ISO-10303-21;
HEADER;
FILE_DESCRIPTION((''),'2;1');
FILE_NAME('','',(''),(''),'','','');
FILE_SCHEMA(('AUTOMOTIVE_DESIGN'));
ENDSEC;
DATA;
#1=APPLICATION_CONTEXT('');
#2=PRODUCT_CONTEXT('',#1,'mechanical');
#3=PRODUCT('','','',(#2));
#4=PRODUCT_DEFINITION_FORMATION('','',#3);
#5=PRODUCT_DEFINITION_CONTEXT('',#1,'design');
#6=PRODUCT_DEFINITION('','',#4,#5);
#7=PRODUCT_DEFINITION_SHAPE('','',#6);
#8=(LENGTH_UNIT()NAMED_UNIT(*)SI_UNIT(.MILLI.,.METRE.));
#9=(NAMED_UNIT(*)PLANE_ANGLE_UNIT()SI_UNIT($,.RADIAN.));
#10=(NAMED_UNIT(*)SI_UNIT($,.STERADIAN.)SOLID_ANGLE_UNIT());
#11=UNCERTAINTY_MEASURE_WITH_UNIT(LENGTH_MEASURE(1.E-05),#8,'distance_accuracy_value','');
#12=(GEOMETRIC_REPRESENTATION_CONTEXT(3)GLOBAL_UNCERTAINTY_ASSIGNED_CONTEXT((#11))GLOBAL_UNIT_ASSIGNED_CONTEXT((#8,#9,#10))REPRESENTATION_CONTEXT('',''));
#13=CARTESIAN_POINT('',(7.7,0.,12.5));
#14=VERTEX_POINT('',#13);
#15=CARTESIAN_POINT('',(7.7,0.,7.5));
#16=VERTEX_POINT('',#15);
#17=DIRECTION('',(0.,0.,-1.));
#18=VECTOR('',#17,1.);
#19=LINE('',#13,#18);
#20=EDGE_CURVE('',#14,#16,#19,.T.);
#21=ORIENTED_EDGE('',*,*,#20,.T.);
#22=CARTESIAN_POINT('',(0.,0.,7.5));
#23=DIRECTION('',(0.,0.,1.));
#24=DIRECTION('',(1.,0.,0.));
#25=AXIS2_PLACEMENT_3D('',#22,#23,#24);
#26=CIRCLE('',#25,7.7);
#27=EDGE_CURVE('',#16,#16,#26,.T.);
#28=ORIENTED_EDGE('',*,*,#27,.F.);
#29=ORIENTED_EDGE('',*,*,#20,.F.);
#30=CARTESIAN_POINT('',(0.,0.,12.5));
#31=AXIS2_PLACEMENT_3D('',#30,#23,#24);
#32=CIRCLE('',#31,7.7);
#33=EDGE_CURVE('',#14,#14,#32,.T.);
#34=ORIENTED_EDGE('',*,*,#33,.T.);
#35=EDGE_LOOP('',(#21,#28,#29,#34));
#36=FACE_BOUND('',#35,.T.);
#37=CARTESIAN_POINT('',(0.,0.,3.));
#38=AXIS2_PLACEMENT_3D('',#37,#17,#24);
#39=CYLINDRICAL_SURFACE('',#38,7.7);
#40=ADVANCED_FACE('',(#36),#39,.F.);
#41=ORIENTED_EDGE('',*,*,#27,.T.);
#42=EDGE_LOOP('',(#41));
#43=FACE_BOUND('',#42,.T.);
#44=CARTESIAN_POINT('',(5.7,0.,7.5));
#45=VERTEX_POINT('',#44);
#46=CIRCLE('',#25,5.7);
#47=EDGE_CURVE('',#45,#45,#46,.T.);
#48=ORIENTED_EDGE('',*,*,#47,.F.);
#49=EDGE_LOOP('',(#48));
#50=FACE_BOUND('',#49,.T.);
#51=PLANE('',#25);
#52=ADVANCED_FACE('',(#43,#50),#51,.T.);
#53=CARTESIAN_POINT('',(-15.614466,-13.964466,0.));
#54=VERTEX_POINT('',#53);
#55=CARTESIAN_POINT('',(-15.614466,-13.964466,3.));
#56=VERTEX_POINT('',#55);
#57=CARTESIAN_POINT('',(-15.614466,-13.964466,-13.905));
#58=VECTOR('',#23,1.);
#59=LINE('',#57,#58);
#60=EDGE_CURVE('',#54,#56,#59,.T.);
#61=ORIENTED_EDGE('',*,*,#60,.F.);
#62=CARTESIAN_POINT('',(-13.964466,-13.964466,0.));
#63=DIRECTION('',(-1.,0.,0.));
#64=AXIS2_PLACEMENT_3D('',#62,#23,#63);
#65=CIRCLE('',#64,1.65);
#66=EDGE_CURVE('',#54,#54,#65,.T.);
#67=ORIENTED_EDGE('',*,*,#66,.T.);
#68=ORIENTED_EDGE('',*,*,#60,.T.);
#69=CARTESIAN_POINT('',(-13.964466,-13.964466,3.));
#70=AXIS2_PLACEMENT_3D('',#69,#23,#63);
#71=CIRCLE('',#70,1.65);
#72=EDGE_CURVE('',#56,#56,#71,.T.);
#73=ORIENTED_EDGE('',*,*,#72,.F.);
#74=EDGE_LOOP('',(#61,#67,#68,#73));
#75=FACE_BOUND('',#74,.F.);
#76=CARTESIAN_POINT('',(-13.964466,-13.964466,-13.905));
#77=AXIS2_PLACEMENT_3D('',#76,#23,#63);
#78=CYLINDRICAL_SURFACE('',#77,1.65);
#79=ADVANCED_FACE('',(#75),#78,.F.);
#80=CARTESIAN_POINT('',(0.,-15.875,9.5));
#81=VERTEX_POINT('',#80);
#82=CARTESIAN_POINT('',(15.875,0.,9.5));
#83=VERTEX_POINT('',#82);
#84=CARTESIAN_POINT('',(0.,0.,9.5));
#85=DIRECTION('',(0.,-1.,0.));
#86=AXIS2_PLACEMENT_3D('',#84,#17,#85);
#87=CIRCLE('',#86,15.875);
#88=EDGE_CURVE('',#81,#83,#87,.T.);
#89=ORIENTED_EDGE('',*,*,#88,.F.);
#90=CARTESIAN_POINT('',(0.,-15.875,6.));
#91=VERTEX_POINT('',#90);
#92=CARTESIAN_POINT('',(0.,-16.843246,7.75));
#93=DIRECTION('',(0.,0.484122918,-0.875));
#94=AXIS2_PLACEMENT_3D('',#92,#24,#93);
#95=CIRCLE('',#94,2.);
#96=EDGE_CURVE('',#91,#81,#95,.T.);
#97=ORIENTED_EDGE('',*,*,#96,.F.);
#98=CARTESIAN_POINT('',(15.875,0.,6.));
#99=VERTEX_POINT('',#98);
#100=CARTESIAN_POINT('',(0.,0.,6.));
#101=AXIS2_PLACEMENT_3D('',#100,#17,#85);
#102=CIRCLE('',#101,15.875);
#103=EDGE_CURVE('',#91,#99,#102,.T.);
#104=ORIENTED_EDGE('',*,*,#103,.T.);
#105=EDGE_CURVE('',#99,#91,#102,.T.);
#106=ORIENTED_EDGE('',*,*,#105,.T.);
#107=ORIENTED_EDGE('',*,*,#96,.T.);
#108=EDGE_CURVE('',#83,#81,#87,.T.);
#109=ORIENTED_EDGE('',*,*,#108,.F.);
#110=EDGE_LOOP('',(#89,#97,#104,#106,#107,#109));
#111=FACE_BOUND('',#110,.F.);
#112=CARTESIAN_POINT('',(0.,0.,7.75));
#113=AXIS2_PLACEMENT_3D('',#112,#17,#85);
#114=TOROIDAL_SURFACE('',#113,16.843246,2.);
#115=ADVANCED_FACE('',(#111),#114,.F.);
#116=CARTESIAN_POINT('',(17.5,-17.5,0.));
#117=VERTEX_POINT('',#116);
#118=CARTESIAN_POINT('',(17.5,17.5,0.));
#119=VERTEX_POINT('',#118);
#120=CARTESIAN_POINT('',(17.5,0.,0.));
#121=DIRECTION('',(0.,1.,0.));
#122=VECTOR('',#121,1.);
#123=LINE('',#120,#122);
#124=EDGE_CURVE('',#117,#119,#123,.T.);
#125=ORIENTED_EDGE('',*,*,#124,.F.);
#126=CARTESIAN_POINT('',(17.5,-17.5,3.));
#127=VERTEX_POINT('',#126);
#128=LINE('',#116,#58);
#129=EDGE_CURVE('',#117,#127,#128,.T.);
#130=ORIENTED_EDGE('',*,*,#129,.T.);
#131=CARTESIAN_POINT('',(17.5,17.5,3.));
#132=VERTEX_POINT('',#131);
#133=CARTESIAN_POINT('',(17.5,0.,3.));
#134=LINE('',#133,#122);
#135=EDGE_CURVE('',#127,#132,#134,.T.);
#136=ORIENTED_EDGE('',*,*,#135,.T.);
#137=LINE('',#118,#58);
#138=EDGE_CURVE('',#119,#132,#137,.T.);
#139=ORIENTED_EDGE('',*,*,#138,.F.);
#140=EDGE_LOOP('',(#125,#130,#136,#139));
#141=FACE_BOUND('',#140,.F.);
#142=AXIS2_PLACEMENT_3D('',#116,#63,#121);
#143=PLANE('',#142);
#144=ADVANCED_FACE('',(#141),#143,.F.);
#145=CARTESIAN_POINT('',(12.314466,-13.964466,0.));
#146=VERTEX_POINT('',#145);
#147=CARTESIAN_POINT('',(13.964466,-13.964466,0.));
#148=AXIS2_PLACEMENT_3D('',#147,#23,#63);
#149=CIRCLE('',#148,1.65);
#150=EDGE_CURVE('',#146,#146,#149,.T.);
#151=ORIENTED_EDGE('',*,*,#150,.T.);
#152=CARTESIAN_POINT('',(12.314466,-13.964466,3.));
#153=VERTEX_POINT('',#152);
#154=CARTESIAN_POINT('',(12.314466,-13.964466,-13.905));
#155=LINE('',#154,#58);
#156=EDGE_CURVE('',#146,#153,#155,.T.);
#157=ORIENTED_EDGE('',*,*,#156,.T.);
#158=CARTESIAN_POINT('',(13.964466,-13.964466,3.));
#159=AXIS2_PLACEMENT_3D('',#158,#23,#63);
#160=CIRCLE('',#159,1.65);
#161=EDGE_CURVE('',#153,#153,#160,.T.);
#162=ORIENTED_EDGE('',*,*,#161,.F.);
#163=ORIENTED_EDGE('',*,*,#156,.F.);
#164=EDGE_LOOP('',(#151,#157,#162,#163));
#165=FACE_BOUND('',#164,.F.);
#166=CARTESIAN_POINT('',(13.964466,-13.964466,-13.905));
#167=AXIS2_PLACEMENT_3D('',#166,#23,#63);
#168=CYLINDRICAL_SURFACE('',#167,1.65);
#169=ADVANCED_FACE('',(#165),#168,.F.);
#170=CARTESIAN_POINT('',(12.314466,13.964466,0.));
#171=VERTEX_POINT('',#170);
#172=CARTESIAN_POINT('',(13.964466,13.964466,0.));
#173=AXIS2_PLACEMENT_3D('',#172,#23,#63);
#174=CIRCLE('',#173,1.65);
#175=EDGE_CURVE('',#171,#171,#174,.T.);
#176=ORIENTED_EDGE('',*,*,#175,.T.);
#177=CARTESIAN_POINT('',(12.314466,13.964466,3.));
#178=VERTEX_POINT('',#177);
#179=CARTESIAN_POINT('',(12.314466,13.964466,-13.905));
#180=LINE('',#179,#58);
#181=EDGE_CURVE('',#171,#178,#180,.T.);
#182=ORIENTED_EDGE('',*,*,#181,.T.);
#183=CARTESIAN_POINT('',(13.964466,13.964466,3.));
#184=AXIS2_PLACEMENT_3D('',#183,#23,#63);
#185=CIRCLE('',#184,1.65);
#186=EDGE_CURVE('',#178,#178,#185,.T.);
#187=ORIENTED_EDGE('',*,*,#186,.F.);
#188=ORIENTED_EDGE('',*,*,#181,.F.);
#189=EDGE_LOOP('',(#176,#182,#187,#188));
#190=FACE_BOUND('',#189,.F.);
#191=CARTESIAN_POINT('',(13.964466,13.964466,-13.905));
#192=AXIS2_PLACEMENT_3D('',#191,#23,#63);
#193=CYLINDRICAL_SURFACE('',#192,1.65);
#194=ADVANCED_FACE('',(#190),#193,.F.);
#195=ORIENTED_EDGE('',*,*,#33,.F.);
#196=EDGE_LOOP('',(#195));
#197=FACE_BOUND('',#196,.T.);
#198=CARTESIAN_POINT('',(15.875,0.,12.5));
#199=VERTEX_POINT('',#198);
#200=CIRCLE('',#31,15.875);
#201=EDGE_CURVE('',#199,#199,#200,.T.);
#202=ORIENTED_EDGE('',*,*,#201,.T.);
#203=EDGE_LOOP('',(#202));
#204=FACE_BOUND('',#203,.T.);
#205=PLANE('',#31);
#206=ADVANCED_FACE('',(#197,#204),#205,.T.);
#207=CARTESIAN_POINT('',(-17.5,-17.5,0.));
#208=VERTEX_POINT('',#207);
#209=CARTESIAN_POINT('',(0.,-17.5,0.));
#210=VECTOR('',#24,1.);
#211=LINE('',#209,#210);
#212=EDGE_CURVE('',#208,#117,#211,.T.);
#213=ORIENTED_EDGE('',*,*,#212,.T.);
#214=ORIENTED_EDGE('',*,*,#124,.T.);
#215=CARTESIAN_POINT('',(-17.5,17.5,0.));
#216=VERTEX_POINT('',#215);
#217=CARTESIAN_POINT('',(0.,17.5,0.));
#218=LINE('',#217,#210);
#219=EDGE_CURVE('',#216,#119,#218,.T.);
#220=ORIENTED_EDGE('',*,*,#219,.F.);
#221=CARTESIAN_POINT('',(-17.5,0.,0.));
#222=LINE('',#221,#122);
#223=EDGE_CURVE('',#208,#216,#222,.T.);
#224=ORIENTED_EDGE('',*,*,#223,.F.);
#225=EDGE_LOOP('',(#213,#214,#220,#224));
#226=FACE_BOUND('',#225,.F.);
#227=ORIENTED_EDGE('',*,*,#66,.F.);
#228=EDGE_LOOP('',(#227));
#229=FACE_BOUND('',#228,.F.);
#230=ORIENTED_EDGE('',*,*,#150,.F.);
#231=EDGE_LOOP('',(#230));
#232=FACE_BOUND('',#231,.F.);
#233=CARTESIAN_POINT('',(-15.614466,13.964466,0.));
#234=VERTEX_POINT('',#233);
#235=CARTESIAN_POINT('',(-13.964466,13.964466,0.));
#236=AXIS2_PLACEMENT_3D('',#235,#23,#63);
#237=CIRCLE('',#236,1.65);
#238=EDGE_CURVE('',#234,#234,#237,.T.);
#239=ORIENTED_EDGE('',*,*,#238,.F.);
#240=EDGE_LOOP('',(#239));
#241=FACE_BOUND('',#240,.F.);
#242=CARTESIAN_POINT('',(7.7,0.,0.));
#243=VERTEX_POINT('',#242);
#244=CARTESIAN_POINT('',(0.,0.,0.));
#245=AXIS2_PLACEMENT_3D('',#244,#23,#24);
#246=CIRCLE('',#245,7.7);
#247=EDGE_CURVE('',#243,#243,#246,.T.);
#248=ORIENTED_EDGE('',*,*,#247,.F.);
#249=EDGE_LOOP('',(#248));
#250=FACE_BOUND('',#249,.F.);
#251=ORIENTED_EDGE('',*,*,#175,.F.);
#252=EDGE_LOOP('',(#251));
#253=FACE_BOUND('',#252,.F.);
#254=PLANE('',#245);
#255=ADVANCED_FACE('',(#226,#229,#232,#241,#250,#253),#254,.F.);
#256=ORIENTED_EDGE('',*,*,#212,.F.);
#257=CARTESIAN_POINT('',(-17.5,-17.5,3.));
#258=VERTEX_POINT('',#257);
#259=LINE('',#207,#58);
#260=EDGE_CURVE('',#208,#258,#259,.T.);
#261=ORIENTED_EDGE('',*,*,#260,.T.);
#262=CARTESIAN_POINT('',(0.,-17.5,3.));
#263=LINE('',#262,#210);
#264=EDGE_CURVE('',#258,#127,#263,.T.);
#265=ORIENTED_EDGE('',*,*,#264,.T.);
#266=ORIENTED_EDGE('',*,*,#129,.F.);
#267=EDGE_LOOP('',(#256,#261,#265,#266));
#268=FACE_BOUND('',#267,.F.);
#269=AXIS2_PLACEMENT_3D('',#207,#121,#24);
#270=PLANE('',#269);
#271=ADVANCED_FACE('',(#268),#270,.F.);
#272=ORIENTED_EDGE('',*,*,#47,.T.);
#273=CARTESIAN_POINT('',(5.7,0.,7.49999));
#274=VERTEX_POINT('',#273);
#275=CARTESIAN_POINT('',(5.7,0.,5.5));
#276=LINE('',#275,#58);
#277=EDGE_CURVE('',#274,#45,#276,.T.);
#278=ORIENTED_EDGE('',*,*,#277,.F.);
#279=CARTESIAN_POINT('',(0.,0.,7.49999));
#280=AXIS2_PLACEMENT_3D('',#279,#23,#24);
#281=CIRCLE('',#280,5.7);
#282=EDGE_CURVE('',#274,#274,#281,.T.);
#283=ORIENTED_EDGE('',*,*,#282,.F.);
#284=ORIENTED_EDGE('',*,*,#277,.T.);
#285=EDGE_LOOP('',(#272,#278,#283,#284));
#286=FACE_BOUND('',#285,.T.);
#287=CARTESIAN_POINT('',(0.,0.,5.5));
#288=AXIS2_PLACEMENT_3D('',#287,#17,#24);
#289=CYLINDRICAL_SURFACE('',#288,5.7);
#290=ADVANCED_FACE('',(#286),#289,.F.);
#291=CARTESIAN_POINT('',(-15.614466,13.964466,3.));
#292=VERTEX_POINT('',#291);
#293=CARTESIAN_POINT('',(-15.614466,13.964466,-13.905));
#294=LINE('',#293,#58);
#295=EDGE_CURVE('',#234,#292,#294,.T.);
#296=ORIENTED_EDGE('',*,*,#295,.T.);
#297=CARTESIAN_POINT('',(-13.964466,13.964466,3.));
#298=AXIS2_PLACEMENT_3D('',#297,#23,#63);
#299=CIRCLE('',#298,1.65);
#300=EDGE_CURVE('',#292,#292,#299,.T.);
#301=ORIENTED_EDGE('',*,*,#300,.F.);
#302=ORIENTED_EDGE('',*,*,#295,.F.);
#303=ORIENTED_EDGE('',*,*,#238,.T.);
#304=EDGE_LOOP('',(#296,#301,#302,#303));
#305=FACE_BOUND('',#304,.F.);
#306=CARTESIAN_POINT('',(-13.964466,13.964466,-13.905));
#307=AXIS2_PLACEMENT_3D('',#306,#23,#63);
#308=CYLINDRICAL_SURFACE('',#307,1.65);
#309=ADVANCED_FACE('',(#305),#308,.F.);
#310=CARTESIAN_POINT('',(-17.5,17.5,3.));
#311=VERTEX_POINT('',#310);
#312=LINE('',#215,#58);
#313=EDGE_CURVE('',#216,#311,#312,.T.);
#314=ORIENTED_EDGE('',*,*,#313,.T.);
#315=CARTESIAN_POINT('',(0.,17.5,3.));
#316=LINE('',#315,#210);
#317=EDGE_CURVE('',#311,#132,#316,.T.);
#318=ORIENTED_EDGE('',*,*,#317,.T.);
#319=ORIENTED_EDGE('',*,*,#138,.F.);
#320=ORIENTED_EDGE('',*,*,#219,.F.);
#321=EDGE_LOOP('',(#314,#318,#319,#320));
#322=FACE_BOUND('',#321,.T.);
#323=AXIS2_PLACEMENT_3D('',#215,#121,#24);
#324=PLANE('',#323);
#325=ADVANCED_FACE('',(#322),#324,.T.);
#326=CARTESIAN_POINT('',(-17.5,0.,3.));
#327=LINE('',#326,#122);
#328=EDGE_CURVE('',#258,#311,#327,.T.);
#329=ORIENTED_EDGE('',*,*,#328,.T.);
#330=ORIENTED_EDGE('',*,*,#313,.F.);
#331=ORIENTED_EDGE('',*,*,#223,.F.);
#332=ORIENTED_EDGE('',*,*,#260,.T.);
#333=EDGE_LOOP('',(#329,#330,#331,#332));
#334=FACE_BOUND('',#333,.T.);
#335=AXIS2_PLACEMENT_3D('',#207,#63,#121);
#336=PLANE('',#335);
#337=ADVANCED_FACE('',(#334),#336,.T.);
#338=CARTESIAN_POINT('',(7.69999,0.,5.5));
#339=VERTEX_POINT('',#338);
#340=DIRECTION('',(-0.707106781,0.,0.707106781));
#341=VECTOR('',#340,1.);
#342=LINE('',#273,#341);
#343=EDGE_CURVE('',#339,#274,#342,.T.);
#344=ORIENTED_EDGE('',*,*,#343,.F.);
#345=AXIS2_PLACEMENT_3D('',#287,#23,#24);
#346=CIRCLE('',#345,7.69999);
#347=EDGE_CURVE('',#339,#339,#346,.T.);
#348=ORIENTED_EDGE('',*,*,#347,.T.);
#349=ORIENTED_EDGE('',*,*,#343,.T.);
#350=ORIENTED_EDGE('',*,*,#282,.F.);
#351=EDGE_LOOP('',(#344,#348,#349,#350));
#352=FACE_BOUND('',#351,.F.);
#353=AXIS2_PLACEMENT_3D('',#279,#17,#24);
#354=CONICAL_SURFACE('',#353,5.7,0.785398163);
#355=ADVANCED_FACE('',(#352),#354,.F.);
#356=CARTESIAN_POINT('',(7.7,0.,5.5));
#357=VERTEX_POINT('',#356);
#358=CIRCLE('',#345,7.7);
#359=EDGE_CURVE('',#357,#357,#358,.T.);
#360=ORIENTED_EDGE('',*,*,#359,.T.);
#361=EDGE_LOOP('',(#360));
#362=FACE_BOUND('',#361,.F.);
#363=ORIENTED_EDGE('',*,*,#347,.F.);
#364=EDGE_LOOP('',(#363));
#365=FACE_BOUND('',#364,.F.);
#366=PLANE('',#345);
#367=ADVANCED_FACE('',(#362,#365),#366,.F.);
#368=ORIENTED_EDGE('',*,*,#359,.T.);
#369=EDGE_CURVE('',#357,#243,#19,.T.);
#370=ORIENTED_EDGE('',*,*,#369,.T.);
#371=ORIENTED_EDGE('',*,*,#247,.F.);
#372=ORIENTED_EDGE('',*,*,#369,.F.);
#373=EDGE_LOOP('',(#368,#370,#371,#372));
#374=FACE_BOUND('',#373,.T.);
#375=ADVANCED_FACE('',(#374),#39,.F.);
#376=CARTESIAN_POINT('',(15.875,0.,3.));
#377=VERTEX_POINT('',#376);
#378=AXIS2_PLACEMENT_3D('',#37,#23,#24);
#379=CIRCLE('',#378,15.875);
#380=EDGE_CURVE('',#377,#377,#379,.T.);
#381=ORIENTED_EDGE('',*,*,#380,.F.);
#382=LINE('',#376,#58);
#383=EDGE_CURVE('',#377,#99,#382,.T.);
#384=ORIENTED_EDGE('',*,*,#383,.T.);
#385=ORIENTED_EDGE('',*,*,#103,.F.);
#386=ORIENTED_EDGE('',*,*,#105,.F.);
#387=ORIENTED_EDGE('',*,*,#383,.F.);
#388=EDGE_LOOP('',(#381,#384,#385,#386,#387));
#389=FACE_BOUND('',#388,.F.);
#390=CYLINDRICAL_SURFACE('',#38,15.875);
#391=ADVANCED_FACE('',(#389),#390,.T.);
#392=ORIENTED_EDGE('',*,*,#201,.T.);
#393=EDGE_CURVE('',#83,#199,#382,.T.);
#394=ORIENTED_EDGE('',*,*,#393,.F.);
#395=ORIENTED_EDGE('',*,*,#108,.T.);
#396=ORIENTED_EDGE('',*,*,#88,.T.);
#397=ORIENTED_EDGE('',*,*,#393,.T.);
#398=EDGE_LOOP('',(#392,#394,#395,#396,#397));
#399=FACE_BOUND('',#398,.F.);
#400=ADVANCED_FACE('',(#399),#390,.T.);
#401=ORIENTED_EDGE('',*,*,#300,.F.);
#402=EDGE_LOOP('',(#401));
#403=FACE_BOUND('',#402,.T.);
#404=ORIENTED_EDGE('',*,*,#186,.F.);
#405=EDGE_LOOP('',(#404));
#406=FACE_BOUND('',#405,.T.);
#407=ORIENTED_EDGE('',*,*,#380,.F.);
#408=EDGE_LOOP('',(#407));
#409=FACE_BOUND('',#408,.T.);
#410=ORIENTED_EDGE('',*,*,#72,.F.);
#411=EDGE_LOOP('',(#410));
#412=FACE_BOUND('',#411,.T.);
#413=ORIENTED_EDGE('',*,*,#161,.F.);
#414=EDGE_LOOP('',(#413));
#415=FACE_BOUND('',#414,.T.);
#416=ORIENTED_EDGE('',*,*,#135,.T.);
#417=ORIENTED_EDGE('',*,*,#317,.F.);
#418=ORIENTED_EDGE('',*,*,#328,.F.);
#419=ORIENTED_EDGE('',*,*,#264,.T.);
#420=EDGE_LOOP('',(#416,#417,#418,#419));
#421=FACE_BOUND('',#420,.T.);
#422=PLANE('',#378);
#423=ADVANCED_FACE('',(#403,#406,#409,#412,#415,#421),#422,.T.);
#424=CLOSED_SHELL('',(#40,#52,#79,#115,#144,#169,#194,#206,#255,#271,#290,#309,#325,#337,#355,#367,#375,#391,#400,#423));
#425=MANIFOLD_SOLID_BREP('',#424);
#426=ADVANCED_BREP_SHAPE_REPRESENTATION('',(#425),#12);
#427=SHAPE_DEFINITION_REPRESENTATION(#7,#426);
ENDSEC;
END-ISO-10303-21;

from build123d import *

# Parameters (mm, degrees)
F2_W      = 35
F2_H      = 35
F2_R      = 15.875
F2_R_2    = 7.7
F3_DEPTH  = 3
F4_D      = 3.3
F4_DEPTH  = 13.905
F4_TIP    = 0.9914200214
F5_R      = 15.875
F5_R_2    = 7.7
F6_DEPTH  = 9.5
F10_R     = 7.7
F10_R_2   = 5.7
F11_DEPTH = 2
F12_SIZE  = 1.99999


# Not quite as in the source:
# - a fillet or chamfer is up to 0.001 mm smaller than in the source, because OpenCascade refuses the exact size


with BuildPart() as f3:
    # F2 (on Top) → F3 (new body)
    with BuildSketch(Plane.XY):
        Rectangle(F2_W, F2_H)
        Circle(F2_R, mode=Mode.SUBTRACT)
        Circle(F2_R)
        Circle(F2_R_2, mode=Mode.SUBTRACT)
    extrude(amount=F3_DEPTH)

    # F4
    with Locations(Plane(origin=(0, 0, 0), x_dir=(1, 0, 0), z_dir=(0, 0, -1))):
        with Locations((-13.9644660941, 13.9644660941), (-13.9644660941, -13.9644660941), (13.9644660941, -13.9644660941), (13.9644660941, 13.9644660941)):
            Hole(F4_D / 2, depth=F4_DEPTH)
            with Locations((0, 0, -(F4_DEPTH + F4_TIP / 2))):  # 118° drill point
                Cone(0, F4_D / 2, F4_TIP, mode=Mode.SUBTRACT)

    # F5 (on face) → F6 (join)
    with BuildSketch(Plane.XY.offset(3)):
        Circle(F5_R)
        Circle(F5_R_2, mode=Mode.SUBTRACT)
    extrude(amount=F6_DEPTH)

    # F7 (on Right) → F8 (revolve, cut)
    with BuildSketch(Plane.YZ):
        with BuildLine():
            ThreePointArc((-15.875, 6), (-14.8432458366, 7.75), (-15.875, 9.5))
            Line((-15.875, 9.5), (-15.875, 6))
        make_face()
    revolve(axis=Axis((0, 0, 3), (0, 0, -1)), mode=Mode.SUBTRACT)

    # F10 (on offset) → F11 (join)
    with BuildSketch(Plane.XY.offset(5.5)):
        Circle(F10_R)
        Circle(F10_R_2, mode=Mode.SUBTRACT)
    extrude(amount=F11_DEPTH)

    # F12 (size 2 in the source; OpenCascade refuses exactly that, so slightly less here)
    f12_edges = [f3.edges().sort_by_distance(p)[0] for p in [
        (-5.7, 0, 5.5),
    ]]
    chamfer(f12_edges, length=F12_SIZE)


solid = f3.part
